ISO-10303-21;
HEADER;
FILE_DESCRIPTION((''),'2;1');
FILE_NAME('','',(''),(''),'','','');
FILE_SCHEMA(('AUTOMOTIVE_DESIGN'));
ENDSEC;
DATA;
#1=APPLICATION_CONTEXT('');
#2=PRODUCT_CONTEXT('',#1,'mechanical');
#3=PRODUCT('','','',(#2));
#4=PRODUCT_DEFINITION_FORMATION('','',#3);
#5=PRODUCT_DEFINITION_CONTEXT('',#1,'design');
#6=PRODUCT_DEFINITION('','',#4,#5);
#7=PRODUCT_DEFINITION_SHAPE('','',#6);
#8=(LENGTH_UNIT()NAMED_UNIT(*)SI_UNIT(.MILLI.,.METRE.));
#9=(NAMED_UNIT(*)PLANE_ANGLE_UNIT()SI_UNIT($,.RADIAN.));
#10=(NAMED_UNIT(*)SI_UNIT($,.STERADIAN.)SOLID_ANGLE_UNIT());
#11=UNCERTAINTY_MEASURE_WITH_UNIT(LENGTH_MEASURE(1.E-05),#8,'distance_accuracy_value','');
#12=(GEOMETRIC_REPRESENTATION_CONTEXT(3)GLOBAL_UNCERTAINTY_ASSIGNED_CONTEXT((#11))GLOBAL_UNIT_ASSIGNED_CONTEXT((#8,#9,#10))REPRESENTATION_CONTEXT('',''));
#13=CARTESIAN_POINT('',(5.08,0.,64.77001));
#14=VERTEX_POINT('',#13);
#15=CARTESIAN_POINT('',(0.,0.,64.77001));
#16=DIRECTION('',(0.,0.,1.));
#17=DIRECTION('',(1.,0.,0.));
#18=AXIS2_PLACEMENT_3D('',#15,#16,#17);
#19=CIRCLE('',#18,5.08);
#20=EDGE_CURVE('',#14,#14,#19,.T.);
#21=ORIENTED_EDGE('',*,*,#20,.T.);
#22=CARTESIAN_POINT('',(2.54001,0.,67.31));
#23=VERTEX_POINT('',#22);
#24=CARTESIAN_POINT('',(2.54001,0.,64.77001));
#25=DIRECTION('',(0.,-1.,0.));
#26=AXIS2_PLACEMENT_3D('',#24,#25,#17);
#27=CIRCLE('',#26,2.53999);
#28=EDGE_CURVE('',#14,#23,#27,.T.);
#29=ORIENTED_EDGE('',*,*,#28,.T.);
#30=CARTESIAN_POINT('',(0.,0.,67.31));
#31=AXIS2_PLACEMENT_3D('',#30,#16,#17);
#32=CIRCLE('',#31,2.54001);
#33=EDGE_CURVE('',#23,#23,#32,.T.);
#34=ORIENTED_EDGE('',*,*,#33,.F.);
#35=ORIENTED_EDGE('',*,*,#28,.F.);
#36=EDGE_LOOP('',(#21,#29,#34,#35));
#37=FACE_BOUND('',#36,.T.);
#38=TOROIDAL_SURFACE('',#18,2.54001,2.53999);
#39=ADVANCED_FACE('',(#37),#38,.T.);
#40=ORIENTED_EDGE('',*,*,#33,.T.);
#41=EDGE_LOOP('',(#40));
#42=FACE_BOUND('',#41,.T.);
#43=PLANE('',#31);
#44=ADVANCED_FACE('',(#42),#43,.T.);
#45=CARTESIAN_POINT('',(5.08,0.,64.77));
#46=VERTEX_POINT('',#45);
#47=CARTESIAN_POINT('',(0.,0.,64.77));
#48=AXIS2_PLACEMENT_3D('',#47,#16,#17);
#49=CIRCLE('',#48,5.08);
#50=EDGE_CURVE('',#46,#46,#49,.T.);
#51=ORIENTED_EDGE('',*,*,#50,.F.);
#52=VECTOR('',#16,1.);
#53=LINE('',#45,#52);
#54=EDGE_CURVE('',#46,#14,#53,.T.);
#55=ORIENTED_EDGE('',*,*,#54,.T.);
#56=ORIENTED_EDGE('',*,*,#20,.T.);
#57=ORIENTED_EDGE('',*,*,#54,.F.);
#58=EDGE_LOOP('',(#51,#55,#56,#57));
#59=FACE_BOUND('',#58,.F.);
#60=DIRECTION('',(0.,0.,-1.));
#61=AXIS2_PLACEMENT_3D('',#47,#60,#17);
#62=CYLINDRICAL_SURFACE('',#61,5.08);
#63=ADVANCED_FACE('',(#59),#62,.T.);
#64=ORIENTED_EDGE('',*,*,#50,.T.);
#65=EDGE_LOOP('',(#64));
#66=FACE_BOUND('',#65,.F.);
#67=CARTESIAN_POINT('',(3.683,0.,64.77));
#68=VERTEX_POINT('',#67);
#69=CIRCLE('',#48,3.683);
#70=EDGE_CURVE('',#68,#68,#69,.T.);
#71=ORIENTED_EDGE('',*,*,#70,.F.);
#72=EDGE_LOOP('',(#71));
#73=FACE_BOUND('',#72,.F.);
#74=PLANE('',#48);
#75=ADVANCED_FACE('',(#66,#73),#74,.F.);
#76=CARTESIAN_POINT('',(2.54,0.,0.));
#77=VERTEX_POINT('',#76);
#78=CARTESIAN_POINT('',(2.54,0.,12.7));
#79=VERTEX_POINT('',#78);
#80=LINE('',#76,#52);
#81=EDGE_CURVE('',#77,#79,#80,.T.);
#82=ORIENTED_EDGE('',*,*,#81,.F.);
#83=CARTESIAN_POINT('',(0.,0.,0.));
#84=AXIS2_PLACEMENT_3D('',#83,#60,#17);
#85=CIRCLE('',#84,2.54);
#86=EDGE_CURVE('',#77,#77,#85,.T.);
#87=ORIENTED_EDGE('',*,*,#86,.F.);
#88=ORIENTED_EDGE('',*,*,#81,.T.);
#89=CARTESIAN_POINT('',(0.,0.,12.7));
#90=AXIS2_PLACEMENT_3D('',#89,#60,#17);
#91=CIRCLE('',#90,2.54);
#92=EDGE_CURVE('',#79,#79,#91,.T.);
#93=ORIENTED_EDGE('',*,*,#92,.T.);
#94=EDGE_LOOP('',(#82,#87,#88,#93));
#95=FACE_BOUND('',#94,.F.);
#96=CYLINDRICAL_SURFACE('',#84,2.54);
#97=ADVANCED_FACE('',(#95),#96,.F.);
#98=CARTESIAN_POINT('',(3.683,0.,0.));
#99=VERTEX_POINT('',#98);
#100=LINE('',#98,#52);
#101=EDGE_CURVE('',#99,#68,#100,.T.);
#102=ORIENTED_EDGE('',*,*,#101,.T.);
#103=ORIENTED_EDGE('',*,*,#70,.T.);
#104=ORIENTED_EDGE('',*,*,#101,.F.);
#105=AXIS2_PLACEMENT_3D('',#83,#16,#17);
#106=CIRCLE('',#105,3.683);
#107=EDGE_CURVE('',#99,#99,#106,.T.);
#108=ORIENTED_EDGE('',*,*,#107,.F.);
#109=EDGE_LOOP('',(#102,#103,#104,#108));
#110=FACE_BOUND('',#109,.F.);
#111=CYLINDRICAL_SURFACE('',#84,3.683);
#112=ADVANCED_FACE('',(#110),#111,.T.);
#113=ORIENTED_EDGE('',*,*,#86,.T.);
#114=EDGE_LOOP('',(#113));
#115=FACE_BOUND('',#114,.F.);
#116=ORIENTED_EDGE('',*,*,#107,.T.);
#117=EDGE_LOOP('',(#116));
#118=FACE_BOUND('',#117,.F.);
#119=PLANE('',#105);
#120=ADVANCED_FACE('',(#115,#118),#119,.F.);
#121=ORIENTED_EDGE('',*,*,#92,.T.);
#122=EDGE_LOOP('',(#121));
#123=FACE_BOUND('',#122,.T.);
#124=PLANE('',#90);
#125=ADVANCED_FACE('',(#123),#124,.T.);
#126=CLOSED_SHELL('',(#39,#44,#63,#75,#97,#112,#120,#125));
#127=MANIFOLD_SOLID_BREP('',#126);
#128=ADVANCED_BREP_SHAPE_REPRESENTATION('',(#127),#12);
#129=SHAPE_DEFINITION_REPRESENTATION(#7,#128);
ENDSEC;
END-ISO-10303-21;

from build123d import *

# Parameters (mm, degrees)
F0_R     = 3.683
F1_DEPTH = 64.77
F2_R     = 5.08
F3_DEPTH = 2.54
F4_R     = 2.53999
F5_R     = 2.54
F6_DEPTH = 12.7


# Not quite as in the source:
# - a fillet or chamfer is up to 0.001 mm smaller than in the source, because OpenCascade refuses the exact size


with BuildPart() as f1:
    # F0 (on Top) → F1 (new body)
    with BuildSketch(Plane.XY):
        Circle(F0_R)
    extrude(amount=F1_DEPTH)

    # F2 (on face) → F3 (join)
    with BuildSketch(Plane.XY.offset(64.77)):
        Circle(F2_R)
    extrude(amount=F3_DEPTH)

    # F4 (radius 2.54 in the source; OpenCascade refuses exactly that, so slightly less here)
    f4_edges = [f1.edges().sort_by_distance(p)[0] for p in [
        (-5.08, 0, 67.31),
    ]]
    fillet(f4_edges, radius=F4_R)

    # F5 (on face) → F6 (cut)
    with BuildSketch(Plane(origin=(0, 0, 0), x_dir=(1, 0, 0), z_dir=(0, 0, -1))):
        Circle(F5_R)
    extrude(amount=-F6_DEPTH, mode=Mode.SUBTRACT)


solid = f1.part
